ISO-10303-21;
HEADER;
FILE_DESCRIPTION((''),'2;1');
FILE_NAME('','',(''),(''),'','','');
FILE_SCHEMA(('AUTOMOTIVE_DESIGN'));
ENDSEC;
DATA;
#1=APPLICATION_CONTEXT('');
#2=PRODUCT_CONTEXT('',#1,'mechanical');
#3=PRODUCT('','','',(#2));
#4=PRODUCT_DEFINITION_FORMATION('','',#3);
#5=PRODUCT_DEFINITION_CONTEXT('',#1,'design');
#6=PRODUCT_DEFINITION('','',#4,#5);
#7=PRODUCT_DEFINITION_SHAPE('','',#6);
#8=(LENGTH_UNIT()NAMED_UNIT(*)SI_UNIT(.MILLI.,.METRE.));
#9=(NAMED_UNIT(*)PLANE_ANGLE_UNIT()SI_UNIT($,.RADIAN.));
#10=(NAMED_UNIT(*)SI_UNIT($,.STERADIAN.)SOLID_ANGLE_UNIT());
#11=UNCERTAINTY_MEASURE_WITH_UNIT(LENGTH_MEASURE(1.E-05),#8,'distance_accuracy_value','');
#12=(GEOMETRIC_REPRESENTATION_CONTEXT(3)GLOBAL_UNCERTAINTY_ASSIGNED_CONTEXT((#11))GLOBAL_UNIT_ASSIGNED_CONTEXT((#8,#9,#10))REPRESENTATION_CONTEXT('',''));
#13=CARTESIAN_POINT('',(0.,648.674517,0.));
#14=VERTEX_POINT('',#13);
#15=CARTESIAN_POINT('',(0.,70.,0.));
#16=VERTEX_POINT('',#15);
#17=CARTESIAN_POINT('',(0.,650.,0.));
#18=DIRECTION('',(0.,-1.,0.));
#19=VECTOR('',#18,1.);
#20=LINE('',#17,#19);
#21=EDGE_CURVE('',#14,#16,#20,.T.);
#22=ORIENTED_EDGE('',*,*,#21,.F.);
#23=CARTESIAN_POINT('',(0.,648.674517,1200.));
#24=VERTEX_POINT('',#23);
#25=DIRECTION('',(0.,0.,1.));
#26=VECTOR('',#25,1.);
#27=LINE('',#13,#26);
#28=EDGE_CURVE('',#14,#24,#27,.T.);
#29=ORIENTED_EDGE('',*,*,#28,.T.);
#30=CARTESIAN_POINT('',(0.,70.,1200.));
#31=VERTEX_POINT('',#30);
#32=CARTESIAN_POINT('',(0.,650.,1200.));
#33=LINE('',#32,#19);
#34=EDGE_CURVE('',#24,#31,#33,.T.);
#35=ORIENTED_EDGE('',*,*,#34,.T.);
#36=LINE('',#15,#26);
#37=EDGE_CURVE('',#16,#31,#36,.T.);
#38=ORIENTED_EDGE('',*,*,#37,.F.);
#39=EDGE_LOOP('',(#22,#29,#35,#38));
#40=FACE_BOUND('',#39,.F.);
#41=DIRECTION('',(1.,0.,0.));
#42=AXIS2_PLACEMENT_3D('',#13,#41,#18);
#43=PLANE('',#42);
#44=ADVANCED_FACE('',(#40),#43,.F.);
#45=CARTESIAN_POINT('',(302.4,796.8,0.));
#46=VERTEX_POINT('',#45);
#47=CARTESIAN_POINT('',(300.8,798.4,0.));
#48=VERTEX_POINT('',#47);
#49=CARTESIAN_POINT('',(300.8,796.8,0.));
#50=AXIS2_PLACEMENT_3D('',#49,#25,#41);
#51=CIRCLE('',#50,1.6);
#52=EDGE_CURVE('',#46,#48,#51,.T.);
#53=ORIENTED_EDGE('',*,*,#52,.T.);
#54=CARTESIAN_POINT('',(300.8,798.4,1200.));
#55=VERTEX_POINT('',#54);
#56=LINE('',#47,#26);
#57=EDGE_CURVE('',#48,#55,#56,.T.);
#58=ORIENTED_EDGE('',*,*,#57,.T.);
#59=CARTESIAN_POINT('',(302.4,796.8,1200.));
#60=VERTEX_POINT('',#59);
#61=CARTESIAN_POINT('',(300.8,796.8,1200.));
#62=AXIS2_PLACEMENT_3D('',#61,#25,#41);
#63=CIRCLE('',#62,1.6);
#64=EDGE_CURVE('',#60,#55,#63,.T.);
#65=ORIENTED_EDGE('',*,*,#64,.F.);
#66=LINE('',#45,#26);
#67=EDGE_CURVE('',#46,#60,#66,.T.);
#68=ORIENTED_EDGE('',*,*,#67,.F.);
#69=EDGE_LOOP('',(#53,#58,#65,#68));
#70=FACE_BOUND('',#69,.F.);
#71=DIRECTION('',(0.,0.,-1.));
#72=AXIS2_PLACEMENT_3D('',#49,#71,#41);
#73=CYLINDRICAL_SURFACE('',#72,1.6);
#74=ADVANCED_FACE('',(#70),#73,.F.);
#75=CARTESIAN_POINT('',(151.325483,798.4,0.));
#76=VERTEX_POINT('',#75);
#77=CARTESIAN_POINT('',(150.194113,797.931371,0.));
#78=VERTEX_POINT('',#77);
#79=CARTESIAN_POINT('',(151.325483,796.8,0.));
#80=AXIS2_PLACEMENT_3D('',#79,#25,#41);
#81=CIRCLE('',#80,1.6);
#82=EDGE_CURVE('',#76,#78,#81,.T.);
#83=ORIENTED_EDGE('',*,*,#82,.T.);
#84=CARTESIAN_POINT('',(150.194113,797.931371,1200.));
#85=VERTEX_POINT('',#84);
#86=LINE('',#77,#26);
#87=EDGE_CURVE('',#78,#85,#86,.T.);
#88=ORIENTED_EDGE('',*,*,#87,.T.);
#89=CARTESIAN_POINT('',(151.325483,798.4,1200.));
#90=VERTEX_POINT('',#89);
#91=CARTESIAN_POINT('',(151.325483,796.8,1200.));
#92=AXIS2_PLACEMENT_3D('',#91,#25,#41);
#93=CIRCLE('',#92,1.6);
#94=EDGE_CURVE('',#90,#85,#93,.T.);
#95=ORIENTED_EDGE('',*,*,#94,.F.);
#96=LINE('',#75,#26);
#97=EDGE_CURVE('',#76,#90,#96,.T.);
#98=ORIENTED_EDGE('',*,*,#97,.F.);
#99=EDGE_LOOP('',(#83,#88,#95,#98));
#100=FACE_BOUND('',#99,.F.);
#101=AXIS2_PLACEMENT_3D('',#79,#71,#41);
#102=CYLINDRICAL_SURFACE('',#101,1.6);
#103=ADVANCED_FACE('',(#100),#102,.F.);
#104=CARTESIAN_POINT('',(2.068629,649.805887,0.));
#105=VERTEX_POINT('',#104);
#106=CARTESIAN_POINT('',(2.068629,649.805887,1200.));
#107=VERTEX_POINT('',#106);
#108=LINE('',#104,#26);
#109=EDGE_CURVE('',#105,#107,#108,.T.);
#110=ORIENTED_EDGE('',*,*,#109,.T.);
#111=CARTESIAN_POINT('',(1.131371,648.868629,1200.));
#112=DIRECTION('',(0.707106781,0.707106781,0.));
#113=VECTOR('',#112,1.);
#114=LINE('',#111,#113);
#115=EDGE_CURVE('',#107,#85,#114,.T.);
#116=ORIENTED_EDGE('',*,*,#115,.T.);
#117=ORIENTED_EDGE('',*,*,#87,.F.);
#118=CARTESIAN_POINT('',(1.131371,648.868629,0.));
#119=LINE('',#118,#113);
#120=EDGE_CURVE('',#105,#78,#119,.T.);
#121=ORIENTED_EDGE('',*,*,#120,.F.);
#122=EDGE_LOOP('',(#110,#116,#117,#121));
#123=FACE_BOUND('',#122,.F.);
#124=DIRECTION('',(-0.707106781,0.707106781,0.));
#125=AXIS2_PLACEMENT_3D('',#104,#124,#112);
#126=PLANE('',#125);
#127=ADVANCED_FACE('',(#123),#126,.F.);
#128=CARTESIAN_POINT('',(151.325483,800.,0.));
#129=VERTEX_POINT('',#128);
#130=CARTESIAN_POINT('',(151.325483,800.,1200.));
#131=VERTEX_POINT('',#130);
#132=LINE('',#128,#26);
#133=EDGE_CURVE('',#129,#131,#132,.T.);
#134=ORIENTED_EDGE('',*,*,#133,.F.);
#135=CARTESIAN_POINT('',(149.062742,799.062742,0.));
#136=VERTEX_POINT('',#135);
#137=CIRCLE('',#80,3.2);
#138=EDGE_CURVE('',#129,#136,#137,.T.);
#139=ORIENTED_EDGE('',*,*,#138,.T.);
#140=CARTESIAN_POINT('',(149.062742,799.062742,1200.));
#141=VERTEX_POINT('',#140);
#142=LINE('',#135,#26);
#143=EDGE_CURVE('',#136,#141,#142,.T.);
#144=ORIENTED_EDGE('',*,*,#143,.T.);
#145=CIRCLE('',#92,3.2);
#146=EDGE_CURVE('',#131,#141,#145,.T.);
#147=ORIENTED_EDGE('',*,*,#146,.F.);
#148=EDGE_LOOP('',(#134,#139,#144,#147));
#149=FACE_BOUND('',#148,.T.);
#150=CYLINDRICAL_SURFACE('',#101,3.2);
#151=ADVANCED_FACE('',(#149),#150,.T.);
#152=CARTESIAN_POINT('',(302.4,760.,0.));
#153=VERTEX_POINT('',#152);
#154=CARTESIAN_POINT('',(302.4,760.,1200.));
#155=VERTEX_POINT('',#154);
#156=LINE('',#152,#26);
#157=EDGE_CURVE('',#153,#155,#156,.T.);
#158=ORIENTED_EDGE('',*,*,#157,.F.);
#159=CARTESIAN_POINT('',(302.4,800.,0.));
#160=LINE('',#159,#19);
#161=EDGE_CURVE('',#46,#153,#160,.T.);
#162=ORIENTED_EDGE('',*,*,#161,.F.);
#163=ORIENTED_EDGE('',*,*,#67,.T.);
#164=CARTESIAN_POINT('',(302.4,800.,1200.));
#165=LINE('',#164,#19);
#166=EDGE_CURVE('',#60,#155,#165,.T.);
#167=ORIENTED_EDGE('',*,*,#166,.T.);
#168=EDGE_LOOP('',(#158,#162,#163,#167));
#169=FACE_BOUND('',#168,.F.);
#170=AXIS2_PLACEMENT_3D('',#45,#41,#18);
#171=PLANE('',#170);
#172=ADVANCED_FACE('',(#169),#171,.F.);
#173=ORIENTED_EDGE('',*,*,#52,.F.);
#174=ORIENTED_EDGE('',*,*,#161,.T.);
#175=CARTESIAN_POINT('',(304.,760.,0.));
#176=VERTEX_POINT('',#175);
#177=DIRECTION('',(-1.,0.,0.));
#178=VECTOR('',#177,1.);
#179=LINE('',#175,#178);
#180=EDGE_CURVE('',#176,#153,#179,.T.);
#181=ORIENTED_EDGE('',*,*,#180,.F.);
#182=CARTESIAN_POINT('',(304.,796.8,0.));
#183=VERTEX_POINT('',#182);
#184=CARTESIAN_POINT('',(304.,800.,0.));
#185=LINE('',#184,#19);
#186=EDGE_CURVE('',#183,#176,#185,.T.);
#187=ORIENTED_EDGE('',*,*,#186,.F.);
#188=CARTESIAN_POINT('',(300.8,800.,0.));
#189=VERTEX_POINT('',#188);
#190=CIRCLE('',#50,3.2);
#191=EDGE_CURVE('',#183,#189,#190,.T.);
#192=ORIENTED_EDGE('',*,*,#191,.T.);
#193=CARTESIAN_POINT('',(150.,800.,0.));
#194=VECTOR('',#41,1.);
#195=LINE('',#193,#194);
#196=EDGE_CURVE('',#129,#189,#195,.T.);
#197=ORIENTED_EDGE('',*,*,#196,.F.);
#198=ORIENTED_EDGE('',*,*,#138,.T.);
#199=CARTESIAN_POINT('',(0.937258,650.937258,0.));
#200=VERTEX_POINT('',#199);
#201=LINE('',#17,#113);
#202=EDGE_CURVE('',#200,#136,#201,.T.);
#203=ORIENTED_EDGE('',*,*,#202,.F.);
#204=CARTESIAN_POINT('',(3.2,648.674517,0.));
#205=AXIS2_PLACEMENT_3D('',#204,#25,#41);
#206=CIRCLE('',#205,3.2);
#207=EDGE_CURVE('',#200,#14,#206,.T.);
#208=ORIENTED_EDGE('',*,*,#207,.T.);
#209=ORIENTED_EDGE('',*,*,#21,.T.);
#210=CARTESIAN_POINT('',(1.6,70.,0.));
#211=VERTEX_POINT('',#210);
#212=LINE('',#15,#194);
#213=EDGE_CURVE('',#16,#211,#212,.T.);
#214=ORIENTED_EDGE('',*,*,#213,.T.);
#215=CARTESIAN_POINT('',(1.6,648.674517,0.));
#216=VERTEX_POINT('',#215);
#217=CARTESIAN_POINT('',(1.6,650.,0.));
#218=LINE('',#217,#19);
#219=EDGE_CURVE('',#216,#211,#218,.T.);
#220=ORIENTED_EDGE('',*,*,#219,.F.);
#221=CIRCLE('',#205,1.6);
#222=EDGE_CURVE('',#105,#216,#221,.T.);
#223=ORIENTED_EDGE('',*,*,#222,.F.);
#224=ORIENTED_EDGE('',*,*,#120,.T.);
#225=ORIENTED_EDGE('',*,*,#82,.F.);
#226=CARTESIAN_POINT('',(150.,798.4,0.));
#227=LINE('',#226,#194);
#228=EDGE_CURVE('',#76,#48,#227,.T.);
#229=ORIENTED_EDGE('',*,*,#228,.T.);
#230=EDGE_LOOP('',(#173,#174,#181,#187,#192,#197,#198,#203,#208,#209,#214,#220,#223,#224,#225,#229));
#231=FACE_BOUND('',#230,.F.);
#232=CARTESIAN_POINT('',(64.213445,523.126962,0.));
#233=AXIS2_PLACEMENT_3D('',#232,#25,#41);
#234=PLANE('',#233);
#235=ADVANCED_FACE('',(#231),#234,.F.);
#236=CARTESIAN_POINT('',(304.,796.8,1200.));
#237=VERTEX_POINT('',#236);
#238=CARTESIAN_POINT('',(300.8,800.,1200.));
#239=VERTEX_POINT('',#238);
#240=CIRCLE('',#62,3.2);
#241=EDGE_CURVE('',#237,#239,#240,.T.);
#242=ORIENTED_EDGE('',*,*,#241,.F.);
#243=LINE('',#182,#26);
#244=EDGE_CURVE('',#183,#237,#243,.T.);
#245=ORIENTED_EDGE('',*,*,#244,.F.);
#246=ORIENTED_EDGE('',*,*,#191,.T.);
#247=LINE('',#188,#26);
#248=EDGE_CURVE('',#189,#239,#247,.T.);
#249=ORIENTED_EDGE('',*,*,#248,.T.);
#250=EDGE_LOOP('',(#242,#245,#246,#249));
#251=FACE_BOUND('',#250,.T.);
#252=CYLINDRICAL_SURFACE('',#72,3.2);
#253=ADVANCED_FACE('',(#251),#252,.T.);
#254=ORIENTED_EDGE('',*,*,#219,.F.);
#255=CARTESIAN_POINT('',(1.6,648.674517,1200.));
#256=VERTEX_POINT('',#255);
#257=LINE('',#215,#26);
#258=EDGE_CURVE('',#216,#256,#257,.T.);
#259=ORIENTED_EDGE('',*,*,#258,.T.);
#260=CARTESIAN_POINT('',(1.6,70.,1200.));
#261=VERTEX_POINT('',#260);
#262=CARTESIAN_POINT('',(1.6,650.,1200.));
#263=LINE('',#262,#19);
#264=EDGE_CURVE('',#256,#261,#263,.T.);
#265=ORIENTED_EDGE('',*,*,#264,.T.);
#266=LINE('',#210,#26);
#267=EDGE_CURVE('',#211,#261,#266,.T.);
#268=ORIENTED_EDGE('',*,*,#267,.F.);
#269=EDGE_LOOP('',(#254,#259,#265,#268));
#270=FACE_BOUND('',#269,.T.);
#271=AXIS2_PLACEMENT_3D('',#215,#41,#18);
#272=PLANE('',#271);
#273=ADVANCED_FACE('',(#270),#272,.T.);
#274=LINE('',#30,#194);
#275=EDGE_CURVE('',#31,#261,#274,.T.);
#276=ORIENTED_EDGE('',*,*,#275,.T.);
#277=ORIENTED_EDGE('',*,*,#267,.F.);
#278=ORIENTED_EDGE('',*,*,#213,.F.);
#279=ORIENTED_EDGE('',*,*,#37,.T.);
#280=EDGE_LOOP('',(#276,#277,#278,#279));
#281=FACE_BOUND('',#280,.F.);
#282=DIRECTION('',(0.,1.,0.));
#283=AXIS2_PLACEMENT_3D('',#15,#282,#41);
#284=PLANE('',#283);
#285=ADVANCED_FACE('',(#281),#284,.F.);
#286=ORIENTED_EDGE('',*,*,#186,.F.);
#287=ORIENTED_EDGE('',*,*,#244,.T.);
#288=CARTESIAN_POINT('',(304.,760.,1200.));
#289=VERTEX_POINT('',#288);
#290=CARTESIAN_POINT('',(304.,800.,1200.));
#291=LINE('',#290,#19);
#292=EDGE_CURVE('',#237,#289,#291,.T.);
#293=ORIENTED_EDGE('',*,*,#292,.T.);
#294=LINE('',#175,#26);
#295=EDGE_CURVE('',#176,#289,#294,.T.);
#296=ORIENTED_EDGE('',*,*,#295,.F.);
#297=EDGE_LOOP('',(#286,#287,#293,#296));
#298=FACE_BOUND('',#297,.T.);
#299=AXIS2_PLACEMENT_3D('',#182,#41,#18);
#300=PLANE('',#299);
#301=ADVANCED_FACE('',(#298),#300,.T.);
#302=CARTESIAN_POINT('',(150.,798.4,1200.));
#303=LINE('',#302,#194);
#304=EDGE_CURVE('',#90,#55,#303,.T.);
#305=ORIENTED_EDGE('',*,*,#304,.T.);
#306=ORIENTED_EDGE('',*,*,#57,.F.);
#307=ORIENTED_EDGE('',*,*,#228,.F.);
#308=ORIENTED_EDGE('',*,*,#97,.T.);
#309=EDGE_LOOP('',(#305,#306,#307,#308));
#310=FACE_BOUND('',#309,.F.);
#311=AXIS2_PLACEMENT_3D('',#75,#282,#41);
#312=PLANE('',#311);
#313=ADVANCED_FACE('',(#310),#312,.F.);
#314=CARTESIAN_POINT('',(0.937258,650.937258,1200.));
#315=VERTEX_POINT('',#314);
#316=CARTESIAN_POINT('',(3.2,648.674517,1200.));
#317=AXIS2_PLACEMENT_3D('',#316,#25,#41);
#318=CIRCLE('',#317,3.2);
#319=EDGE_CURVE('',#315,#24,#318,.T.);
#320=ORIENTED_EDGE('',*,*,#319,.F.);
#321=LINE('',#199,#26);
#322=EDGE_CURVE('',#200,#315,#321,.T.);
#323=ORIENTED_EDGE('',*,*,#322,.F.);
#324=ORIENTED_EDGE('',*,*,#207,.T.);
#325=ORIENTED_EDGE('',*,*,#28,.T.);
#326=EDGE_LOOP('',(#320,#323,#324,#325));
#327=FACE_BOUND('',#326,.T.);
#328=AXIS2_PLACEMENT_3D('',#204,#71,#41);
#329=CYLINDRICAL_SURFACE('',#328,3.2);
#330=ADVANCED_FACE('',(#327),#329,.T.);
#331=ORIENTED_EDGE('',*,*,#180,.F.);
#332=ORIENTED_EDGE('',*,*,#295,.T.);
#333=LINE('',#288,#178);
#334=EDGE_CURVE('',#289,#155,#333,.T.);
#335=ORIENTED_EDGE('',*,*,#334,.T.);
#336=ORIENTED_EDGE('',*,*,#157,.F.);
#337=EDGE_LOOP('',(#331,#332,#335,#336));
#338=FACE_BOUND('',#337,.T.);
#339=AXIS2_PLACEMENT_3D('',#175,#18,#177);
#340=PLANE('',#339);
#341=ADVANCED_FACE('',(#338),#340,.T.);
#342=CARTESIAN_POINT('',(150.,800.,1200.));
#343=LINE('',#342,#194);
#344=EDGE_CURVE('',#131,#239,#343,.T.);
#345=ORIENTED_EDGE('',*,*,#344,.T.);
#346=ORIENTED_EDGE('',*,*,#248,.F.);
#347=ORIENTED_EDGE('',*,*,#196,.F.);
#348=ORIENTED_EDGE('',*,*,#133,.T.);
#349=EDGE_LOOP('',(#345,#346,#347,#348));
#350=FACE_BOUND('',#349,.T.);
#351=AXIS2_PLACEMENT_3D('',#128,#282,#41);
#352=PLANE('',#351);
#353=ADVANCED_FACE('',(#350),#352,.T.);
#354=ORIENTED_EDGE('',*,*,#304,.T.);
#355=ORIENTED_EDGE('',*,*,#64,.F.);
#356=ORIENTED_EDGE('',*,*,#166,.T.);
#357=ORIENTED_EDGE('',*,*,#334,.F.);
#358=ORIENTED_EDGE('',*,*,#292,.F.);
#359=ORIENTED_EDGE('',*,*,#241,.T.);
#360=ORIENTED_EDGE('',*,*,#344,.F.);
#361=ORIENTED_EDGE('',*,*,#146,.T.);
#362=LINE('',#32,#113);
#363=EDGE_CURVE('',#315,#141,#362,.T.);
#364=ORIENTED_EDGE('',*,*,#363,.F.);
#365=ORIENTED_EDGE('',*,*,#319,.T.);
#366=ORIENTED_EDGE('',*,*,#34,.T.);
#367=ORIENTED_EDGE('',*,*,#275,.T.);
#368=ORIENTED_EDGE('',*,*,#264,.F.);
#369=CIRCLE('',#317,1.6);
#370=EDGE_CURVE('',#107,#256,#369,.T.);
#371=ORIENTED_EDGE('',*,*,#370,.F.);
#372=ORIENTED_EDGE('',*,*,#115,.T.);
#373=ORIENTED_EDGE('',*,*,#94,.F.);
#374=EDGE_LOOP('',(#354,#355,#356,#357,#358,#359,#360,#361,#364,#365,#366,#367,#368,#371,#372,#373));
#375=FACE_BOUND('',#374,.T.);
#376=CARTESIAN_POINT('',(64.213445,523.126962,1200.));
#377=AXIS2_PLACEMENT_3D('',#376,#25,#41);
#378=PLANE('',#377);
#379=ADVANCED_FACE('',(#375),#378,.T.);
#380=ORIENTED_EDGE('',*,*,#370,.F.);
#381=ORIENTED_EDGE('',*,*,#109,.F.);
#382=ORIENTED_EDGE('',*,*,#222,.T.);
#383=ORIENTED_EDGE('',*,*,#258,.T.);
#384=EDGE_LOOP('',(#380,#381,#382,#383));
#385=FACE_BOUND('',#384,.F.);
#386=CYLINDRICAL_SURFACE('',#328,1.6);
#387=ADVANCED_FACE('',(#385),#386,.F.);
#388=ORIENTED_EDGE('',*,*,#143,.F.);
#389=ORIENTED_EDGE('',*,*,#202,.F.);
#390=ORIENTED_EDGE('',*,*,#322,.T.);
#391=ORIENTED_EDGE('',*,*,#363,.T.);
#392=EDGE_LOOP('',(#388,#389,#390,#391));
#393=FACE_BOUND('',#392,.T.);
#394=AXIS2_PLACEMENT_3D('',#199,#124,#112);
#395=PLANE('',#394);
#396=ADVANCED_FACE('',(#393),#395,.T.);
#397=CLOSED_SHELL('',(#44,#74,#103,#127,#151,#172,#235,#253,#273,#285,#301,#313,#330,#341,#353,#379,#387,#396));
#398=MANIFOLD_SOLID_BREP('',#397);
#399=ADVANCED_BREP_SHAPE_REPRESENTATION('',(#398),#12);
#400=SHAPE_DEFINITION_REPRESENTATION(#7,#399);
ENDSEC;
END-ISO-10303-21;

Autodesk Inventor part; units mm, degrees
ref_plane "YZ Plane" through (0, 0, 0) normal (1, 0, 0) x (0, 1, 0)
ref_plane "XZ Plane" through (0, 0, 0) normal (0, 1, 0) x (-1, 0, 0)
ref_plane "XY Plane" through (0, 0, 0) normal (0, 0, 1) x (1, 0, 0)
sketch "Sketch1" plane through (0, 0, 0) normal (0, 0, 1) x (1, 0, 0)
  line L0 (0, 650) -> (150, 800)
  line L1 (150, 800) -> (304, 800)
  line L2 (304, 800) -> (304, 760)
  line L3 (0, 650) -> (0, 70)
  point P0 (0, 0)
  dimension "d3" = 154
  dimension "d25" = 800
  dimension "d26" = 150
  dimension "d27" = 40
  dimension "d28" = 135
  dimension "d29" = 580
  dimension "d30" = 70
contour flange "Contour Flange1" sketch "Sketch1" thickness 1.6 bend radius 1.6 width 1200 along (0, 0, 1) mid plane no both sides no wall seen from (0, 360, 0) lies toward (1, 0, 0) curves L3 L0 L1 L2
bend "Bend1"
corner "Corner1"
equation "\"d4\" = Thickness"
equation "\"d5\" = BendReliefWidth"
equation "\"d6\" = BendReliefDepth"
equation "\"d7\" = MinimumRemnant"
equation "\"d8\" = TransitionRadius"
equation "\"d10\" = BendRadius"
equation "\"d12\" = CornerReliefSize"
equation "\"d13\" = GapSize"
equation "\"d14\" = JacobiRadiusSize"
equation "\"BendRadius\" = Thickness"
equation "\"BendReliefWidth\" = Thickness"
equation "\"BendReliefDepth\" = 0.5 * Thickness"
equation "\"CornerReliefSize\" = 4 * Thickness"
equation "\"MinimumRemnant\" = 2 * Thickness"
equation "\"TransitionRadius\" = BendRadius"
equation "\"JacobiRadiusSize\" = BendRadius"
equation "\"GapSize\" = Thickness"
equation "\"Thickness\" = 1.6"
properties part number "Front Cover with Cent point" material "Steel"
